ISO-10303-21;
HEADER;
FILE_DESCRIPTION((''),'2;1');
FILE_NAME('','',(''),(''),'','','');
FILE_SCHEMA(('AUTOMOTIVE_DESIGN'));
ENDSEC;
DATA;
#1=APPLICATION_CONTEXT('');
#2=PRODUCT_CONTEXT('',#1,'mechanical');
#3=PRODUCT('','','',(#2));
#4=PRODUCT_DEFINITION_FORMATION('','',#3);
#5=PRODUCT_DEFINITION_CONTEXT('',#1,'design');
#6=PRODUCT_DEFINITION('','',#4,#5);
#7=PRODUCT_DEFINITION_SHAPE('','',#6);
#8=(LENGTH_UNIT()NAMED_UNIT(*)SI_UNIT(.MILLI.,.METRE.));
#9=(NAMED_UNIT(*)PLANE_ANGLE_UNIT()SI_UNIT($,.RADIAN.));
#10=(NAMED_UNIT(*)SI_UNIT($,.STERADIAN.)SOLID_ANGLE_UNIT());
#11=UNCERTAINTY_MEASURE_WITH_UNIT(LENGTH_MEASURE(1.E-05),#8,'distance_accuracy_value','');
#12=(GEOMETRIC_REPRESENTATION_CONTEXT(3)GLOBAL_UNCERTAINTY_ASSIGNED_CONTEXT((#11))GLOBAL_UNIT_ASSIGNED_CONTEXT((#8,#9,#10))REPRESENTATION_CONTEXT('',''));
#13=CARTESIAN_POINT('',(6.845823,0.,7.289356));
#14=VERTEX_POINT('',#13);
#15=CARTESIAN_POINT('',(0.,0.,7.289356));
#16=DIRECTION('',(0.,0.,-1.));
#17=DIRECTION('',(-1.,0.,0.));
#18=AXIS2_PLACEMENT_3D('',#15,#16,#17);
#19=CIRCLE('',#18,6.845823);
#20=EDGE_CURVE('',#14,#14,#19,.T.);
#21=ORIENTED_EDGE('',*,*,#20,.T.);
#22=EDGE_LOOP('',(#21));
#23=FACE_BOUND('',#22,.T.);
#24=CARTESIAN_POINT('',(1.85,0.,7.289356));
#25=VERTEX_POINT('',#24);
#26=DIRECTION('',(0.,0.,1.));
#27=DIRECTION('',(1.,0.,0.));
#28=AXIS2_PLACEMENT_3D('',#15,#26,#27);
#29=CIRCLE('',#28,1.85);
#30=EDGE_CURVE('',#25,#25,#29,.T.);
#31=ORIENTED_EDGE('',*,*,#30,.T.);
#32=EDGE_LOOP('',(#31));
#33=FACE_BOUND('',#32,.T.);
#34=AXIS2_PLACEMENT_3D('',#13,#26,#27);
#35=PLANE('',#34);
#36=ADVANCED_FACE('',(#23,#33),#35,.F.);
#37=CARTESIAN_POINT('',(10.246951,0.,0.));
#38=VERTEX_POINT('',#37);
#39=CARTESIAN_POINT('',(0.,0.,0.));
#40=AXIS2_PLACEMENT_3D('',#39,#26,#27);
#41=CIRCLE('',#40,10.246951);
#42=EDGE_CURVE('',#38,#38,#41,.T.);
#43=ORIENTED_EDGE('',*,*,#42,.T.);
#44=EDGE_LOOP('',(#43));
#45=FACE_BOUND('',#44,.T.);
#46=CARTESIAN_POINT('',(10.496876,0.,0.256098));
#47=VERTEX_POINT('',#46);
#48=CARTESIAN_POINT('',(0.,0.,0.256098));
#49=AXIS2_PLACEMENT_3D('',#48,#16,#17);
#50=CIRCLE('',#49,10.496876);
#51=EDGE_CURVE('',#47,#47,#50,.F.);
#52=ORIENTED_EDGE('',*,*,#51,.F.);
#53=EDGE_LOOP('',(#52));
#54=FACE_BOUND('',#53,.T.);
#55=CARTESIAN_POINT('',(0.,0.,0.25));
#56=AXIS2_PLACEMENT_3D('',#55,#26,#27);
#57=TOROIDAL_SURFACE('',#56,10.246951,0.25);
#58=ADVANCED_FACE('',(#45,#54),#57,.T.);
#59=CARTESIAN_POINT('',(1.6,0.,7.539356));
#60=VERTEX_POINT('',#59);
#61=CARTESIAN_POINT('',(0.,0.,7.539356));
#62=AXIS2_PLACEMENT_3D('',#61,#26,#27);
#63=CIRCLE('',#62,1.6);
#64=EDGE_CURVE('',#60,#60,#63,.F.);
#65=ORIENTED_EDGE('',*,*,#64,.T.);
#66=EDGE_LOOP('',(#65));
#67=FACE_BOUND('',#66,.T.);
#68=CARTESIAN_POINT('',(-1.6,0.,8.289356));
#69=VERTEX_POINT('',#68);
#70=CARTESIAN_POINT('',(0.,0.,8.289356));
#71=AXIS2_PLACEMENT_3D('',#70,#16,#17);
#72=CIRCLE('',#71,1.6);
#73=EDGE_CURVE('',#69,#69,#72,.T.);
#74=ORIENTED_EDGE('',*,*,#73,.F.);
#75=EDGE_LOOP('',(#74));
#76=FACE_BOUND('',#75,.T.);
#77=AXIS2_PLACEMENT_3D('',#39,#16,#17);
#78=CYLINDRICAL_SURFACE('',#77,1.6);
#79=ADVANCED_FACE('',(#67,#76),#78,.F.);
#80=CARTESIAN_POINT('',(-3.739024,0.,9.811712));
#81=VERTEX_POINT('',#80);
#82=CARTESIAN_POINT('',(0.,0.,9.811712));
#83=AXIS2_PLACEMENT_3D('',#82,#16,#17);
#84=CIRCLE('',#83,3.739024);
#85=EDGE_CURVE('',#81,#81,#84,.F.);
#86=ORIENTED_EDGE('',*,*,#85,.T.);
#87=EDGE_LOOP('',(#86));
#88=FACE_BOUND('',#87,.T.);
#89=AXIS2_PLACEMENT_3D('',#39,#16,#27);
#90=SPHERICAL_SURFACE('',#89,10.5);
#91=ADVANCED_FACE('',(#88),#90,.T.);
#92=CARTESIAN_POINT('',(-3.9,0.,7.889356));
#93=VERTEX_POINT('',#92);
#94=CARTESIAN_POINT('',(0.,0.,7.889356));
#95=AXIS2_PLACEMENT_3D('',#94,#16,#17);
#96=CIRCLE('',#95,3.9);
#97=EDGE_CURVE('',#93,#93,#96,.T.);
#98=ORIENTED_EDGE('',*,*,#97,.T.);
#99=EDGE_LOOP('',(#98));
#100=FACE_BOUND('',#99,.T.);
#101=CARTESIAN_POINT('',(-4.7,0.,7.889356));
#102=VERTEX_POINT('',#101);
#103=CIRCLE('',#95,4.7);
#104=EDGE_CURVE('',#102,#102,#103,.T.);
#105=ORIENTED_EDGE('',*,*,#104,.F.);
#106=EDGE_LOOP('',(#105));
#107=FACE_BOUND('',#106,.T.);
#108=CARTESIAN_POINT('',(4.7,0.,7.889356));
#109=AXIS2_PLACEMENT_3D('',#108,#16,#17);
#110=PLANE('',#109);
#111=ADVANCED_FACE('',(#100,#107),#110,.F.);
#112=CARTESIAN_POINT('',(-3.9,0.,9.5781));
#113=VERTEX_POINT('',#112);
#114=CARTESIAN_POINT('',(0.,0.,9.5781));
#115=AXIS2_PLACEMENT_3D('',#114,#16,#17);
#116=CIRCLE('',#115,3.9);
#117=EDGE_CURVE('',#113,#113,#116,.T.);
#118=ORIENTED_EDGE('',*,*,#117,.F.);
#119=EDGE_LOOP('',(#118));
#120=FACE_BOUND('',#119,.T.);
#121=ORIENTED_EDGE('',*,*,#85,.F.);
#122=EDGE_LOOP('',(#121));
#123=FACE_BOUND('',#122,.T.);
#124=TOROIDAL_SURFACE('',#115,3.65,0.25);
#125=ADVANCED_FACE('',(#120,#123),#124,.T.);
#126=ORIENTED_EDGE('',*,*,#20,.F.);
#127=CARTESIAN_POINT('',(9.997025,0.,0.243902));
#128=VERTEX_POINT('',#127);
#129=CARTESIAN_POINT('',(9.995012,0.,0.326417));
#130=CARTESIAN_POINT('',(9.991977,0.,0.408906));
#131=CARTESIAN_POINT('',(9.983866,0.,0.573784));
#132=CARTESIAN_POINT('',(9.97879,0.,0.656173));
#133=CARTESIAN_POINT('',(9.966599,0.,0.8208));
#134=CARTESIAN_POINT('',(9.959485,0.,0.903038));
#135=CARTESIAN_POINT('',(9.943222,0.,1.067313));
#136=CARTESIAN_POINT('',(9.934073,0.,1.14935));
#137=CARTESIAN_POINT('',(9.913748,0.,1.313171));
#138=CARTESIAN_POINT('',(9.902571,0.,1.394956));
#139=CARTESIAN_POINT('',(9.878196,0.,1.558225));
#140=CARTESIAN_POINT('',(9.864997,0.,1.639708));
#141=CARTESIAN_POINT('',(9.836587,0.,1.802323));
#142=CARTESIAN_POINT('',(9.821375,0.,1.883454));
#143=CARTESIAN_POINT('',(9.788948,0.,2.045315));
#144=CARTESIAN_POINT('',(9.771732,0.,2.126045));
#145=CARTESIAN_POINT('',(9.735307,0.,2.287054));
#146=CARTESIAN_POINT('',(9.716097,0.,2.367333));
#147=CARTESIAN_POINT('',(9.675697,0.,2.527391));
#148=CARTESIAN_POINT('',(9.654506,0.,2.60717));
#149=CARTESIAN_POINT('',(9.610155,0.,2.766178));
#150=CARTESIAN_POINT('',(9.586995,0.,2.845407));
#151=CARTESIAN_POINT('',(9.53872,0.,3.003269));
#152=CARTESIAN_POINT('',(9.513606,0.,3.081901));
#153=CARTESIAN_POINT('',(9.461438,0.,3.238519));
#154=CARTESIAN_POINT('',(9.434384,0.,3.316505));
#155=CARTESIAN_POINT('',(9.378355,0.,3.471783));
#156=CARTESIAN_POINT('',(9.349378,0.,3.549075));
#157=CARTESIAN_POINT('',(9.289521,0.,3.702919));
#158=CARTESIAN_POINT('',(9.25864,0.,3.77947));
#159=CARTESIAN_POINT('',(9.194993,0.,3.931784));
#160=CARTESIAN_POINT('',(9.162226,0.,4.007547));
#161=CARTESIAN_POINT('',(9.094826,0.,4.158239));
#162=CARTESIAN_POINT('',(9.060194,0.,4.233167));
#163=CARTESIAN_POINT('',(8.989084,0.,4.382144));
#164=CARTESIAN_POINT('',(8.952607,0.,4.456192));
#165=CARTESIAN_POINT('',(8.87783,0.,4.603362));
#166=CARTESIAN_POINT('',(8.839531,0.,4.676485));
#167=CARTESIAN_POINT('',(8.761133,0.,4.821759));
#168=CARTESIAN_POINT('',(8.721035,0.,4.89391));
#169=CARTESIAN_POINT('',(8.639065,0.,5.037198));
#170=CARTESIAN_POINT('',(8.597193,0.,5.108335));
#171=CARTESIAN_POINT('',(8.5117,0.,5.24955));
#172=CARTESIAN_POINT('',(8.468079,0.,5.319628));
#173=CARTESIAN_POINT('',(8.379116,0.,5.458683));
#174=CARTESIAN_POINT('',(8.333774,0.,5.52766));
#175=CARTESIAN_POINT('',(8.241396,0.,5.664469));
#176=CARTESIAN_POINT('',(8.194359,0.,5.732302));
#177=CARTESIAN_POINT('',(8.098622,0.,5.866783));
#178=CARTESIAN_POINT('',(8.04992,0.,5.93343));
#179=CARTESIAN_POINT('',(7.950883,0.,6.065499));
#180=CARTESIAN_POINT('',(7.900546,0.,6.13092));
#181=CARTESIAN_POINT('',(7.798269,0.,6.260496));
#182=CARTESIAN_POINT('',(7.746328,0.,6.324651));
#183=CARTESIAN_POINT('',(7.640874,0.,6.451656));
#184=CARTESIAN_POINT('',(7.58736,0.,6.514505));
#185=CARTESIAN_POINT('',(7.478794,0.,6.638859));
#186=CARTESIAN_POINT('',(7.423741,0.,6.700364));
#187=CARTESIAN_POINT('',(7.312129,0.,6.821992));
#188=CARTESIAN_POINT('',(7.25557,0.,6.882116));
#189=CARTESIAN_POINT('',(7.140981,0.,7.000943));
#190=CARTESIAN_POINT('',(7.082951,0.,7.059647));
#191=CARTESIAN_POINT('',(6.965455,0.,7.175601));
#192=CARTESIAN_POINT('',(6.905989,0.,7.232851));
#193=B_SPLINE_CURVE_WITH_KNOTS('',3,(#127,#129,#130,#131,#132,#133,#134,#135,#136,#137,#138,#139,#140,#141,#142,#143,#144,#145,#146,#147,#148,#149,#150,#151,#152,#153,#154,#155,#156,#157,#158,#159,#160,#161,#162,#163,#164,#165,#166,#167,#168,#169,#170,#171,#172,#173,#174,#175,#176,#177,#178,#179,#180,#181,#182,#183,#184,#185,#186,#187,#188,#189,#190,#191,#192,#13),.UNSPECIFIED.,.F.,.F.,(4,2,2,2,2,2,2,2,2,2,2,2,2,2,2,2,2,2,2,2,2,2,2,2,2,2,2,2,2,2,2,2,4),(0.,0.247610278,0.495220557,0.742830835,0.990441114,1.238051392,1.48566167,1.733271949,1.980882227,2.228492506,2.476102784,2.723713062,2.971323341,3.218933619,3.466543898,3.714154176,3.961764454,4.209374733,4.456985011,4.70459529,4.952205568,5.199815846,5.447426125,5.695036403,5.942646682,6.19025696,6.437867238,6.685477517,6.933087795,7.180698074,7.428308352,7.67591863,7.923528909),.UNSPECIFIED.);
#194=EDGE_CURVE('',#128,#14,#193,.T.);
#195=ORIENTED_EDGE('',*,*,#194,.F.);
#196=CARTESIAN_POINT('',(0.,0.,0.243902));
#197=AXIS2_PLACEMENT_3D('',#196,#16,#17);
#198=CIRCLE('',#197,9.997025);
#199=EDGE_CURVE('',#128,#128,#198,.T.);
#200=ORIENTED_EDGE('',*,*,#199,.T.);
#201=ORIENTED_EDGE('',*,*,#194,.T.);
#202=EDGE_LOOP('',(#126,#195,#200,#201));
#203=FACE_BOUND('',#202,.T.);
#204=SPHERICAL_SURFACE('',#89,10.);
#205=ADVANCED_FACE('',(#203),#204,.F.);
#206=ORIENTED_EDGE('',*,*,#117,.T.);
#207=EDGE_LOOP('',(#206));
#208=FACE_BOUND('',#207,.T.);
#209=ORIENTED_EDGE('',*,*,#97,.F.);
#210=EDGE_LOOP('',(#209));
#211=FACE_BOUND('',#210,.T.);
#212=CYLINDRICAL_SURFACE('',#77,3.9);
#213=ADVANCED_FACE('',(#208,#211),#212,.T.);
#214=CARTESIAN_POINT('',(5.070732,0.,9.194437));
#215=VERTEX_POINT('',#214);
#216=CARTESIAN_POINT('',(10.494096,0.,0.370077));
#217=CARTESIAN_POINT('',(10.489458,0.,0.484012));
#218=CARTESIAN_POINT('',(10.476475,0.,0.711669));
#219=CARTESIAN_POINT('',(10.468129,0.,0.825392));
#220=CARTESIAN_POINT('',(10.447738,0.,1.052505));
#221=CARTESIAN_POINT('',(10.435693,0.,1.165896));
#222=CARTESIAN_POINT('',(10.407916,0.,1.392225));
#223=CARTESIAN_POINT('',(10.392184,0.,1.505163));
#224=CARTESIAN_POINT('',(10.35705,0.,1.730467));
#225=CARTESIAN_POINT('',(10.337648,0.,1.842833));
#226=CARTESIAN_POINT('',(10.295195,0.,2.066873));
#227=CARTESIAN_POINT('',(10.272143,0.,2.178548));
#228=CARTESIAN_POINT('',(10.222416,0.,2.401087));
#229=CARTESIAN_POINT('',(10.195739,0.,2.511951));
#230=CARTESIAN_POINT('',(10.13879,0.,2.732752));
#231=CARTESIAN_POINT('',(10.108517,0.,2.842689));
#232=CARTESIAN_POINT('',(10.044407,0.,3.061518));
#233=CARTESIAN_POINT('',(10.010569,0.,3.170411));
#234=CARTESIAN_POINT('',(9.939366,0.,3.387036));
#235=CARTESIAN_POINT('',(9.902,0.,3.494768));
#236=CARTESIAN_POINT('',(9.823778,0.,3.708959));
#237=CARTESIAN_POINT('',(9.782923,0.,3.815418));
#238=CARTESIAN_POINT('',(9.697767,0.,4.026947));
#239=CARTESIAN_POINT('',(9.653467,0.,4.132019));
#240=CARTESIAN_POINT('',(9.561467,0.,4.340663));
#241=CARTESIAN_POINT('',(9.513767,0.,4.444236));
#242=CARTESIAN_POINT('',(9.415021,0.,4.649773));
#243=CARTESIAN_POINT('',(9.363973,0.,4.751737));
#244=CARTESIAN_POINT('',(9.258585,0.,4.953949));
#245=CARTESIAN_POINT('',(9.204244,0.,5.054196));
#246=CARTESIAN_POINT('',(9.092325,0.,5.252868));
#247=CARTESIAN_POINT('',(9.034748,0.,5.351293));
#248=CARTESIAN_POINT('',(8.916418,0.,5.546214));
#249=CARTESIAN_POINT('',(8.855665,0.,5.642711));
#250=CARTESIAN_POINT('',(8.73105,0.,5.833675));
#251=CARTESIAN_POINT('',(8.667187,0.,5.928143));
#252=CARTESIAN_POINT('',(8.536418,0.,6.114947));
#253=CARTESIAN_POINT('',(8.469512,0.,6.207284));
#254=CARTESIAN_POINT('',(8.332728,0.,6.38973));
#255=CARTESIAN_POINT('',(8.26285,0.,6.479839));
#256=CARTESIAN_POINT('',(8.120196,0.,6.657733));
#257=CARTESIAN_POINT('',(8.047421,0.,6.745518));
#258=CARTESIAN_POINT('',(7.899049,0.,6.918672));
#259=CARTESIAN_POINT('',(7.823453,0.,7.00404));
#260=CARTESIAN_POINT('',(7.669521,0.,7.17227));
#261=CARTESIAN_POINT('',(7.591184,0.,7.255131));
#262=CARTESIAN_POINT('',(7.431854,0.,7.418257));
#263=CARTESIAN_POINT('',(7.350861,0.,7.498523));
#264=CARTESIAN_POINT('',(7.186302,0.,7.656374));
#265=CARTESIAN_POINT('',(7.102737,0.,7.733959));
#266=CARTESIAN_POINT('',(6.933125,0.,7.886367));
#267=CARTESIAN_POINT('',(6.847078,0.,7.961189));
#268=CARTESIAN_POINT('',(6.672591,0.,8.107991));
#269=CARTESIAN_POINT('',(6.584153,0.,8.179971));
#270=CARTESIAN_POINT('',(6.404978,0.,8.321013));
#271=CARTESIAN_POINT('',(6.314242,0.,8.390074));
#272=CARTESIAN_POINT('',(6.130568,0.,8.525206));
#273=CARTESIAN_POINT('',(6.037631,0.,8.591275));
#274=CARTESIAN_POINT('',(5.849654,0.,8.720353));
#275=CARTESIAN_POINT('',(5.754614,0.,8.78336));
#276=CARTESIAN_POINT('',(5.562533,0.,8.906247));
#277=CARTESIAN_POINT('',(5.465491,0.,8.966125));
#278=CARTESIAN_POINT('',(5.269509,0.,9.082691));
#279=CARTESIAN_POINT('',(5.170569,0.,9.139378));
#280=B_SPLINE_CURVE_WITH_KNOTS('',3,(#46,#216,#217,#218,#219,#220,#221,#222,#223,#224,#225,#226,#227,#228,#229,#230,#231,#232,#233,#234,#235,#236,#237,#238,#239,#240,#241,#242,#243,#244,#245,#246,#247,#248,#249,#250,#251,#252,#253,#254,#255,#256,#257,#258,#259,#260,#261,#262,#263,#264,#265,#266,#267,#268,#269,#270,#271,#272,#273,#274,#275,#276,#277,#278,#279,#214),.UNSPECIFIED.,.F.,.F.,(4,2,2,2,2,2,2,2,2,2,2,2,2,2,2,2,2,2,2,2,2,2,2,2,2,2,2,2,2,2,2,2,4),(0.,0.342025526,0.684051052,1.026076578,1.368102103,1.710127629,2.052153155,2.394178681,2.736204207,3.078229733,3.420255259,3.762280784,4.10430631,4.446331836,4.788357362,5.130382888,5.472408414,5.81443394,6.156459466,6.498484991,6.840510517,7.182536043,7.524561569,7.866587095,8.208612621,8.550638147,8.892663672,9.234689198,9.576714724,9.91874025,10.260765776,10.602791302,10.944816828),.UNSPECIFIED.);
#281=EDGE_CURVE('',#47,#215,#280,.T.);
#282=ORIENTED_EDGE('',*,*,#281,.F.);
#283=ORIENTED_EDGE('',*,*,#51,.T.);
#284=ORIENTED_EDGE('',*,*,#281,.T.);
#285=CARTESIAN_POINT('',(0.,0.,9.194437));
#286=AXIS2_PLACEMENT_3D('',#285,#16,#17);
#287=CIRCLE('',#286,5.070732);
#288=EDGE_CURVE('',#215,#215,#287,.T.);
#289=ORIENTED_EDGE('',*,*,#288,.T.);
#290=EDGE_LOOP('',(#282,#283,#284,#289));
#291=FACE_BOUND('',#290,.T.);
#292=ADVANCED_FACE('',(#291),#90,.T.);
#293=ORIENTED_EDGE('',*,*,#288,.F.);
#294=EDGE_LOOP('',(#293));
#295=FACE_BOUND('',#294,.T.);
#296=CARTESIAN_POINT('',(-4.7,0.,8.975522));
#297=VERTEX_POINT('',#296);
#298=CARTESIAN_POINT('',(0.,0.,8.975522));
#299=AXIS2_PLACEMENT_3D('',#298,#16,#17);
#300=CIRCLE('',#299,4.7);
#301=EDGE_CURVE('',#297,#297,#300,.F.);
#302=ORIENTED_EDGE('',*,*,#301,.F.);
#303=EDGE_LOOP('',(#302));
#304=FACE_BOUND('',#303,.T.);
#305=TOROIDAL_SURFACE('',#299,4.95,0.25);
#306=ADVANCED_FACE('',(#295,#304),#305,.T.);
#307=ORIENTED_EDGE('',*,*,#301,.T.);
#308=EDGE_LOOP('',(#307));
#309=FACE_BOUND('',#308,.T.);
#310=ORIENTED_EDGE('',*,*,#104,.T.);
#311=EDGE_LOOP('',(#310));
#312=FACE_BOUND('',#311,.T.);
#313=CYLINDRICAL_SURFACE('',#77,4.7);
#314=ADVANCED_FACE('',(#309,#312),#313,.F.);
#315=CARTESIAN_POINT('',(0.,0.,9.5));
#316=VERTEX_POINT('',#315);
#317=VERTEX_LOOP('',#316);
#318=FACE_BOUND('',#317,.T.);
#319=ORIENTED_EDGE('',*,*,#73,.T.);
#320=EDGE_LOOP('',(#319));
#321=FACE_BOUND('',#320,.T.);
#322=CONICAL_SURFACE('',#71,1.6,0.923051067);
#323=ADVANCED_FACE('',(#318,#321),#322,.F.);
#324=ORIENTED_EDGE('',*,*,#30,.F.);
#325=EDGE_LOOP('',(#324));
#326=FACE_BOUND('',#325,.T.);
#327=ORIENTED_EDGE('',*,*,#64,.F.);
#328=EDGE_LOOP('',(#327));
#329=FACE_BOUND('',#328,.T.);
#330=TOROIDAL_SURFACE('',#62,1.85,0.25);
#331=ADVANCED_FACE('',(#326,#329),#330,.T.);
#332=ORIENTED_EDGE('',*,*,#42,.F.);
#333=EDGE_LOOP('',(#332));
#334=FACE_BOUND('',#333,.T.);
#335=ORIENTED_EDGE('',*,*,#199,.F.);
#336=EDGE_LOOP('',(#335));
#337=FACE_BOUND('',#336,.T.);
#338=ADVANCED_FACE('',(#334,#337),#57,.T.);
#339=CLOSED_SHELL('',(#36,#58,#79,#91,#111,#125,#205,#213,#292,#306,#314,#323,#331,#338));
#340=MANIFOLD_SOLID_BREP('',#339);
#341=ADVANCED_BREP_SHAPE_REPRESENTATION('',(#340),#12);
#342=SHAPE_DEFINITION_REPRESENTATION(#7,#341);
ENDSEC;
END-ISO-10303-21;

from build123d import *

# Parameters (mm, degrees)
FILLET1_R = 0.25


with BuildPart() as part:
    # Sketch2 → Main Body (revolve)
    with BuildSketch(Plane(origin=(0, 0, 0), x_dir=(1, 0, 0), z_dir=(0, 1, 0)), mode=Mode.PRIVATE) as main_body_sk:
        with BuildLine():
            Line((6.84582309418425, -7.289355675444402), (1.5999999999999999, -7.289355675444404))
            Line((1.5999999999999999, -7.289355675444404), (1.5999999999999999, -8.289355675444403))
            Line((1.5999999999999999, -8.289355675444403), (0, -9.500000000000002))
            Line((0, -9.500000000000002), (0, -10.5))
            ThreePointArc((0, -10.5), (1.985839381922277, -10.310501537229241), (3.9000000000000004, -9.748846085563152))
            Line((3.9000000000000004, -9.748846085563152), (3.9000000000000004, -7.889355675444406))
            Line((3.9000000000000004, -7.889355675444406), (4.7, -7.8893556754444045))
            Line((4.7, -7.8893556754444045), (4.7, -9.389355675444403))
            ThreePointArc((4.7, -9.389355675444403), (8.933084573650918, -5.5181518645285585), (10.5, 0))
            Line((10.5, 0), (10, 0))
            ThreePointArc((10, 0), (9.177642152041082, -3.9712572982720147), (6.84582309418425, -7.289355675444402))
        make_face()
    revolve(main_body_sk.sketch.rotate(Axis((0, 0, 0), (0, 0, 1)), 180), axis=Axis((0, 0, 0), (0, 0, 1)))

    # Fillet1
    # the kernel refuses this fillet: 0.25 mm, written as the material it takes off along each edge
    with BuildSketch(Plane(origin=(0, 0, 7.289355675444404), x_dir=(-1, 1.2e-16, 0), z_dir=(1.2e-16, 1, 0))) as fillet1_piece_1:
        with BuildLine():
            CenterArc((1.5999999999999999 + FILLET1_R, FILLET1_R), FILLET1_R, 179.9999999999996, 90.0000000000004)
            Line((1.5999999999999999, FILLET1_R), (1.5999999999999999, 0))
            Line((1.5999999999999999, 0), (1.5999999999999999 + FILLET1_R, -1.78e-15))
        make_face()
    revolve(axis=Axis((0, 0, 7.289355675444404), (0, 0, 1)), mode=Mode.SUBTRACT)
    with BuildSketch(Plane(origin=(0, 0, 0), x_dir=(-1, 1.2e-16, 0), z_dir=(1.2e-16, 1, 0))) as fillet1_piece_2:
        with BuildLine():
            CenterArc((10.246950765959598, 0.25), FILLET1_R, 181.39759662824545, 88.60240337175458)
            ThreePointArc((9.99702513752156, 0.24390243902439043), (9.999256256722687, 0.12196029022679075), (10, 0))
            Line((10, 0), (10.246950765959598, 0))
        make_face()
    revolve(axis=Axis((0, 0, 0), (0, 0, 1)), mode=Mode.SUBTRACT)
    with BuildSketch(Plane(origin=(0, 0, 5.6e-16), x_dir=(-1, 1.2e-16, 0), z_dir=(1.2e-16, 1, 0))) as fillet1_piece_3:
        with BuildLine():
            CenterArc((10.246950765959598, 0.24999999999999944), FILLET1_R, 270.0000000000004, 91.39759662824514)
            Line((10.2469507659596, -5.6e-16), (10.5, 0))
            ThreePointArc((10.5, 0), (10.499219069558821, 0.12805830473812999), (10.496876394397637, 0.2560975609756094))
        make_face()
    revolve(axis=Axis((0, 0, 5.6e-16), (0, 0, 1)), mode=Mode.SUBTRACT)
    with BuildSketch(Plane(origin=(0, 0, 9.389355675444403), x_dir=(-1, 1.2e-16, 0), z_dir=(1.2e-16, 1, 0))) as fillet1_piece_4:
        with BuildLine():
            CenterArc((4.95, -0.41383340651612777), FILLET1_R, 61.12326703097314, 118.87673296902688)
            ThreePointArc((5.070731707317046, -0.19491822922521607), (4.8863378723857025, -0.0956103487803901), (4.700000000000001, 0))
            Line((4.700000000000001, 0), (4.7, -0.41383340651612777))
        make_face()
    revolve(axis=Axis((0, 0, 9.389355675444403), (0, 0, 1)), mode=Mode.SUBTRACT)
    with BuildSketch(Plane(origin=(0, 0, 9.748846085563152), x_dir=(-1, 1.2e-16, 0), z_dir=(1.2e-16, 1, 0))) as fillet1_piece_5:
        with BuildLine():
            CenterArc((3.649999999999999, -0.17074606520420765), FILLET1_R, 4.0711e-13, 69.13927364542349)
            Line((3.899999999999999, -0.17074606520420588), (3.9000000000000004, 0))
            ThreePointArc((3.9000000000000004, 0), (3.8196415337402567, 0.03176425089982082), (3.739024390243901, 0.062866130414303))
        make_face()
    revolve(axis=Axis((0, 0, 9.748846085563152), (0, 0, 1)), mode=Mode.SUBTRACT)


solid = part.part
